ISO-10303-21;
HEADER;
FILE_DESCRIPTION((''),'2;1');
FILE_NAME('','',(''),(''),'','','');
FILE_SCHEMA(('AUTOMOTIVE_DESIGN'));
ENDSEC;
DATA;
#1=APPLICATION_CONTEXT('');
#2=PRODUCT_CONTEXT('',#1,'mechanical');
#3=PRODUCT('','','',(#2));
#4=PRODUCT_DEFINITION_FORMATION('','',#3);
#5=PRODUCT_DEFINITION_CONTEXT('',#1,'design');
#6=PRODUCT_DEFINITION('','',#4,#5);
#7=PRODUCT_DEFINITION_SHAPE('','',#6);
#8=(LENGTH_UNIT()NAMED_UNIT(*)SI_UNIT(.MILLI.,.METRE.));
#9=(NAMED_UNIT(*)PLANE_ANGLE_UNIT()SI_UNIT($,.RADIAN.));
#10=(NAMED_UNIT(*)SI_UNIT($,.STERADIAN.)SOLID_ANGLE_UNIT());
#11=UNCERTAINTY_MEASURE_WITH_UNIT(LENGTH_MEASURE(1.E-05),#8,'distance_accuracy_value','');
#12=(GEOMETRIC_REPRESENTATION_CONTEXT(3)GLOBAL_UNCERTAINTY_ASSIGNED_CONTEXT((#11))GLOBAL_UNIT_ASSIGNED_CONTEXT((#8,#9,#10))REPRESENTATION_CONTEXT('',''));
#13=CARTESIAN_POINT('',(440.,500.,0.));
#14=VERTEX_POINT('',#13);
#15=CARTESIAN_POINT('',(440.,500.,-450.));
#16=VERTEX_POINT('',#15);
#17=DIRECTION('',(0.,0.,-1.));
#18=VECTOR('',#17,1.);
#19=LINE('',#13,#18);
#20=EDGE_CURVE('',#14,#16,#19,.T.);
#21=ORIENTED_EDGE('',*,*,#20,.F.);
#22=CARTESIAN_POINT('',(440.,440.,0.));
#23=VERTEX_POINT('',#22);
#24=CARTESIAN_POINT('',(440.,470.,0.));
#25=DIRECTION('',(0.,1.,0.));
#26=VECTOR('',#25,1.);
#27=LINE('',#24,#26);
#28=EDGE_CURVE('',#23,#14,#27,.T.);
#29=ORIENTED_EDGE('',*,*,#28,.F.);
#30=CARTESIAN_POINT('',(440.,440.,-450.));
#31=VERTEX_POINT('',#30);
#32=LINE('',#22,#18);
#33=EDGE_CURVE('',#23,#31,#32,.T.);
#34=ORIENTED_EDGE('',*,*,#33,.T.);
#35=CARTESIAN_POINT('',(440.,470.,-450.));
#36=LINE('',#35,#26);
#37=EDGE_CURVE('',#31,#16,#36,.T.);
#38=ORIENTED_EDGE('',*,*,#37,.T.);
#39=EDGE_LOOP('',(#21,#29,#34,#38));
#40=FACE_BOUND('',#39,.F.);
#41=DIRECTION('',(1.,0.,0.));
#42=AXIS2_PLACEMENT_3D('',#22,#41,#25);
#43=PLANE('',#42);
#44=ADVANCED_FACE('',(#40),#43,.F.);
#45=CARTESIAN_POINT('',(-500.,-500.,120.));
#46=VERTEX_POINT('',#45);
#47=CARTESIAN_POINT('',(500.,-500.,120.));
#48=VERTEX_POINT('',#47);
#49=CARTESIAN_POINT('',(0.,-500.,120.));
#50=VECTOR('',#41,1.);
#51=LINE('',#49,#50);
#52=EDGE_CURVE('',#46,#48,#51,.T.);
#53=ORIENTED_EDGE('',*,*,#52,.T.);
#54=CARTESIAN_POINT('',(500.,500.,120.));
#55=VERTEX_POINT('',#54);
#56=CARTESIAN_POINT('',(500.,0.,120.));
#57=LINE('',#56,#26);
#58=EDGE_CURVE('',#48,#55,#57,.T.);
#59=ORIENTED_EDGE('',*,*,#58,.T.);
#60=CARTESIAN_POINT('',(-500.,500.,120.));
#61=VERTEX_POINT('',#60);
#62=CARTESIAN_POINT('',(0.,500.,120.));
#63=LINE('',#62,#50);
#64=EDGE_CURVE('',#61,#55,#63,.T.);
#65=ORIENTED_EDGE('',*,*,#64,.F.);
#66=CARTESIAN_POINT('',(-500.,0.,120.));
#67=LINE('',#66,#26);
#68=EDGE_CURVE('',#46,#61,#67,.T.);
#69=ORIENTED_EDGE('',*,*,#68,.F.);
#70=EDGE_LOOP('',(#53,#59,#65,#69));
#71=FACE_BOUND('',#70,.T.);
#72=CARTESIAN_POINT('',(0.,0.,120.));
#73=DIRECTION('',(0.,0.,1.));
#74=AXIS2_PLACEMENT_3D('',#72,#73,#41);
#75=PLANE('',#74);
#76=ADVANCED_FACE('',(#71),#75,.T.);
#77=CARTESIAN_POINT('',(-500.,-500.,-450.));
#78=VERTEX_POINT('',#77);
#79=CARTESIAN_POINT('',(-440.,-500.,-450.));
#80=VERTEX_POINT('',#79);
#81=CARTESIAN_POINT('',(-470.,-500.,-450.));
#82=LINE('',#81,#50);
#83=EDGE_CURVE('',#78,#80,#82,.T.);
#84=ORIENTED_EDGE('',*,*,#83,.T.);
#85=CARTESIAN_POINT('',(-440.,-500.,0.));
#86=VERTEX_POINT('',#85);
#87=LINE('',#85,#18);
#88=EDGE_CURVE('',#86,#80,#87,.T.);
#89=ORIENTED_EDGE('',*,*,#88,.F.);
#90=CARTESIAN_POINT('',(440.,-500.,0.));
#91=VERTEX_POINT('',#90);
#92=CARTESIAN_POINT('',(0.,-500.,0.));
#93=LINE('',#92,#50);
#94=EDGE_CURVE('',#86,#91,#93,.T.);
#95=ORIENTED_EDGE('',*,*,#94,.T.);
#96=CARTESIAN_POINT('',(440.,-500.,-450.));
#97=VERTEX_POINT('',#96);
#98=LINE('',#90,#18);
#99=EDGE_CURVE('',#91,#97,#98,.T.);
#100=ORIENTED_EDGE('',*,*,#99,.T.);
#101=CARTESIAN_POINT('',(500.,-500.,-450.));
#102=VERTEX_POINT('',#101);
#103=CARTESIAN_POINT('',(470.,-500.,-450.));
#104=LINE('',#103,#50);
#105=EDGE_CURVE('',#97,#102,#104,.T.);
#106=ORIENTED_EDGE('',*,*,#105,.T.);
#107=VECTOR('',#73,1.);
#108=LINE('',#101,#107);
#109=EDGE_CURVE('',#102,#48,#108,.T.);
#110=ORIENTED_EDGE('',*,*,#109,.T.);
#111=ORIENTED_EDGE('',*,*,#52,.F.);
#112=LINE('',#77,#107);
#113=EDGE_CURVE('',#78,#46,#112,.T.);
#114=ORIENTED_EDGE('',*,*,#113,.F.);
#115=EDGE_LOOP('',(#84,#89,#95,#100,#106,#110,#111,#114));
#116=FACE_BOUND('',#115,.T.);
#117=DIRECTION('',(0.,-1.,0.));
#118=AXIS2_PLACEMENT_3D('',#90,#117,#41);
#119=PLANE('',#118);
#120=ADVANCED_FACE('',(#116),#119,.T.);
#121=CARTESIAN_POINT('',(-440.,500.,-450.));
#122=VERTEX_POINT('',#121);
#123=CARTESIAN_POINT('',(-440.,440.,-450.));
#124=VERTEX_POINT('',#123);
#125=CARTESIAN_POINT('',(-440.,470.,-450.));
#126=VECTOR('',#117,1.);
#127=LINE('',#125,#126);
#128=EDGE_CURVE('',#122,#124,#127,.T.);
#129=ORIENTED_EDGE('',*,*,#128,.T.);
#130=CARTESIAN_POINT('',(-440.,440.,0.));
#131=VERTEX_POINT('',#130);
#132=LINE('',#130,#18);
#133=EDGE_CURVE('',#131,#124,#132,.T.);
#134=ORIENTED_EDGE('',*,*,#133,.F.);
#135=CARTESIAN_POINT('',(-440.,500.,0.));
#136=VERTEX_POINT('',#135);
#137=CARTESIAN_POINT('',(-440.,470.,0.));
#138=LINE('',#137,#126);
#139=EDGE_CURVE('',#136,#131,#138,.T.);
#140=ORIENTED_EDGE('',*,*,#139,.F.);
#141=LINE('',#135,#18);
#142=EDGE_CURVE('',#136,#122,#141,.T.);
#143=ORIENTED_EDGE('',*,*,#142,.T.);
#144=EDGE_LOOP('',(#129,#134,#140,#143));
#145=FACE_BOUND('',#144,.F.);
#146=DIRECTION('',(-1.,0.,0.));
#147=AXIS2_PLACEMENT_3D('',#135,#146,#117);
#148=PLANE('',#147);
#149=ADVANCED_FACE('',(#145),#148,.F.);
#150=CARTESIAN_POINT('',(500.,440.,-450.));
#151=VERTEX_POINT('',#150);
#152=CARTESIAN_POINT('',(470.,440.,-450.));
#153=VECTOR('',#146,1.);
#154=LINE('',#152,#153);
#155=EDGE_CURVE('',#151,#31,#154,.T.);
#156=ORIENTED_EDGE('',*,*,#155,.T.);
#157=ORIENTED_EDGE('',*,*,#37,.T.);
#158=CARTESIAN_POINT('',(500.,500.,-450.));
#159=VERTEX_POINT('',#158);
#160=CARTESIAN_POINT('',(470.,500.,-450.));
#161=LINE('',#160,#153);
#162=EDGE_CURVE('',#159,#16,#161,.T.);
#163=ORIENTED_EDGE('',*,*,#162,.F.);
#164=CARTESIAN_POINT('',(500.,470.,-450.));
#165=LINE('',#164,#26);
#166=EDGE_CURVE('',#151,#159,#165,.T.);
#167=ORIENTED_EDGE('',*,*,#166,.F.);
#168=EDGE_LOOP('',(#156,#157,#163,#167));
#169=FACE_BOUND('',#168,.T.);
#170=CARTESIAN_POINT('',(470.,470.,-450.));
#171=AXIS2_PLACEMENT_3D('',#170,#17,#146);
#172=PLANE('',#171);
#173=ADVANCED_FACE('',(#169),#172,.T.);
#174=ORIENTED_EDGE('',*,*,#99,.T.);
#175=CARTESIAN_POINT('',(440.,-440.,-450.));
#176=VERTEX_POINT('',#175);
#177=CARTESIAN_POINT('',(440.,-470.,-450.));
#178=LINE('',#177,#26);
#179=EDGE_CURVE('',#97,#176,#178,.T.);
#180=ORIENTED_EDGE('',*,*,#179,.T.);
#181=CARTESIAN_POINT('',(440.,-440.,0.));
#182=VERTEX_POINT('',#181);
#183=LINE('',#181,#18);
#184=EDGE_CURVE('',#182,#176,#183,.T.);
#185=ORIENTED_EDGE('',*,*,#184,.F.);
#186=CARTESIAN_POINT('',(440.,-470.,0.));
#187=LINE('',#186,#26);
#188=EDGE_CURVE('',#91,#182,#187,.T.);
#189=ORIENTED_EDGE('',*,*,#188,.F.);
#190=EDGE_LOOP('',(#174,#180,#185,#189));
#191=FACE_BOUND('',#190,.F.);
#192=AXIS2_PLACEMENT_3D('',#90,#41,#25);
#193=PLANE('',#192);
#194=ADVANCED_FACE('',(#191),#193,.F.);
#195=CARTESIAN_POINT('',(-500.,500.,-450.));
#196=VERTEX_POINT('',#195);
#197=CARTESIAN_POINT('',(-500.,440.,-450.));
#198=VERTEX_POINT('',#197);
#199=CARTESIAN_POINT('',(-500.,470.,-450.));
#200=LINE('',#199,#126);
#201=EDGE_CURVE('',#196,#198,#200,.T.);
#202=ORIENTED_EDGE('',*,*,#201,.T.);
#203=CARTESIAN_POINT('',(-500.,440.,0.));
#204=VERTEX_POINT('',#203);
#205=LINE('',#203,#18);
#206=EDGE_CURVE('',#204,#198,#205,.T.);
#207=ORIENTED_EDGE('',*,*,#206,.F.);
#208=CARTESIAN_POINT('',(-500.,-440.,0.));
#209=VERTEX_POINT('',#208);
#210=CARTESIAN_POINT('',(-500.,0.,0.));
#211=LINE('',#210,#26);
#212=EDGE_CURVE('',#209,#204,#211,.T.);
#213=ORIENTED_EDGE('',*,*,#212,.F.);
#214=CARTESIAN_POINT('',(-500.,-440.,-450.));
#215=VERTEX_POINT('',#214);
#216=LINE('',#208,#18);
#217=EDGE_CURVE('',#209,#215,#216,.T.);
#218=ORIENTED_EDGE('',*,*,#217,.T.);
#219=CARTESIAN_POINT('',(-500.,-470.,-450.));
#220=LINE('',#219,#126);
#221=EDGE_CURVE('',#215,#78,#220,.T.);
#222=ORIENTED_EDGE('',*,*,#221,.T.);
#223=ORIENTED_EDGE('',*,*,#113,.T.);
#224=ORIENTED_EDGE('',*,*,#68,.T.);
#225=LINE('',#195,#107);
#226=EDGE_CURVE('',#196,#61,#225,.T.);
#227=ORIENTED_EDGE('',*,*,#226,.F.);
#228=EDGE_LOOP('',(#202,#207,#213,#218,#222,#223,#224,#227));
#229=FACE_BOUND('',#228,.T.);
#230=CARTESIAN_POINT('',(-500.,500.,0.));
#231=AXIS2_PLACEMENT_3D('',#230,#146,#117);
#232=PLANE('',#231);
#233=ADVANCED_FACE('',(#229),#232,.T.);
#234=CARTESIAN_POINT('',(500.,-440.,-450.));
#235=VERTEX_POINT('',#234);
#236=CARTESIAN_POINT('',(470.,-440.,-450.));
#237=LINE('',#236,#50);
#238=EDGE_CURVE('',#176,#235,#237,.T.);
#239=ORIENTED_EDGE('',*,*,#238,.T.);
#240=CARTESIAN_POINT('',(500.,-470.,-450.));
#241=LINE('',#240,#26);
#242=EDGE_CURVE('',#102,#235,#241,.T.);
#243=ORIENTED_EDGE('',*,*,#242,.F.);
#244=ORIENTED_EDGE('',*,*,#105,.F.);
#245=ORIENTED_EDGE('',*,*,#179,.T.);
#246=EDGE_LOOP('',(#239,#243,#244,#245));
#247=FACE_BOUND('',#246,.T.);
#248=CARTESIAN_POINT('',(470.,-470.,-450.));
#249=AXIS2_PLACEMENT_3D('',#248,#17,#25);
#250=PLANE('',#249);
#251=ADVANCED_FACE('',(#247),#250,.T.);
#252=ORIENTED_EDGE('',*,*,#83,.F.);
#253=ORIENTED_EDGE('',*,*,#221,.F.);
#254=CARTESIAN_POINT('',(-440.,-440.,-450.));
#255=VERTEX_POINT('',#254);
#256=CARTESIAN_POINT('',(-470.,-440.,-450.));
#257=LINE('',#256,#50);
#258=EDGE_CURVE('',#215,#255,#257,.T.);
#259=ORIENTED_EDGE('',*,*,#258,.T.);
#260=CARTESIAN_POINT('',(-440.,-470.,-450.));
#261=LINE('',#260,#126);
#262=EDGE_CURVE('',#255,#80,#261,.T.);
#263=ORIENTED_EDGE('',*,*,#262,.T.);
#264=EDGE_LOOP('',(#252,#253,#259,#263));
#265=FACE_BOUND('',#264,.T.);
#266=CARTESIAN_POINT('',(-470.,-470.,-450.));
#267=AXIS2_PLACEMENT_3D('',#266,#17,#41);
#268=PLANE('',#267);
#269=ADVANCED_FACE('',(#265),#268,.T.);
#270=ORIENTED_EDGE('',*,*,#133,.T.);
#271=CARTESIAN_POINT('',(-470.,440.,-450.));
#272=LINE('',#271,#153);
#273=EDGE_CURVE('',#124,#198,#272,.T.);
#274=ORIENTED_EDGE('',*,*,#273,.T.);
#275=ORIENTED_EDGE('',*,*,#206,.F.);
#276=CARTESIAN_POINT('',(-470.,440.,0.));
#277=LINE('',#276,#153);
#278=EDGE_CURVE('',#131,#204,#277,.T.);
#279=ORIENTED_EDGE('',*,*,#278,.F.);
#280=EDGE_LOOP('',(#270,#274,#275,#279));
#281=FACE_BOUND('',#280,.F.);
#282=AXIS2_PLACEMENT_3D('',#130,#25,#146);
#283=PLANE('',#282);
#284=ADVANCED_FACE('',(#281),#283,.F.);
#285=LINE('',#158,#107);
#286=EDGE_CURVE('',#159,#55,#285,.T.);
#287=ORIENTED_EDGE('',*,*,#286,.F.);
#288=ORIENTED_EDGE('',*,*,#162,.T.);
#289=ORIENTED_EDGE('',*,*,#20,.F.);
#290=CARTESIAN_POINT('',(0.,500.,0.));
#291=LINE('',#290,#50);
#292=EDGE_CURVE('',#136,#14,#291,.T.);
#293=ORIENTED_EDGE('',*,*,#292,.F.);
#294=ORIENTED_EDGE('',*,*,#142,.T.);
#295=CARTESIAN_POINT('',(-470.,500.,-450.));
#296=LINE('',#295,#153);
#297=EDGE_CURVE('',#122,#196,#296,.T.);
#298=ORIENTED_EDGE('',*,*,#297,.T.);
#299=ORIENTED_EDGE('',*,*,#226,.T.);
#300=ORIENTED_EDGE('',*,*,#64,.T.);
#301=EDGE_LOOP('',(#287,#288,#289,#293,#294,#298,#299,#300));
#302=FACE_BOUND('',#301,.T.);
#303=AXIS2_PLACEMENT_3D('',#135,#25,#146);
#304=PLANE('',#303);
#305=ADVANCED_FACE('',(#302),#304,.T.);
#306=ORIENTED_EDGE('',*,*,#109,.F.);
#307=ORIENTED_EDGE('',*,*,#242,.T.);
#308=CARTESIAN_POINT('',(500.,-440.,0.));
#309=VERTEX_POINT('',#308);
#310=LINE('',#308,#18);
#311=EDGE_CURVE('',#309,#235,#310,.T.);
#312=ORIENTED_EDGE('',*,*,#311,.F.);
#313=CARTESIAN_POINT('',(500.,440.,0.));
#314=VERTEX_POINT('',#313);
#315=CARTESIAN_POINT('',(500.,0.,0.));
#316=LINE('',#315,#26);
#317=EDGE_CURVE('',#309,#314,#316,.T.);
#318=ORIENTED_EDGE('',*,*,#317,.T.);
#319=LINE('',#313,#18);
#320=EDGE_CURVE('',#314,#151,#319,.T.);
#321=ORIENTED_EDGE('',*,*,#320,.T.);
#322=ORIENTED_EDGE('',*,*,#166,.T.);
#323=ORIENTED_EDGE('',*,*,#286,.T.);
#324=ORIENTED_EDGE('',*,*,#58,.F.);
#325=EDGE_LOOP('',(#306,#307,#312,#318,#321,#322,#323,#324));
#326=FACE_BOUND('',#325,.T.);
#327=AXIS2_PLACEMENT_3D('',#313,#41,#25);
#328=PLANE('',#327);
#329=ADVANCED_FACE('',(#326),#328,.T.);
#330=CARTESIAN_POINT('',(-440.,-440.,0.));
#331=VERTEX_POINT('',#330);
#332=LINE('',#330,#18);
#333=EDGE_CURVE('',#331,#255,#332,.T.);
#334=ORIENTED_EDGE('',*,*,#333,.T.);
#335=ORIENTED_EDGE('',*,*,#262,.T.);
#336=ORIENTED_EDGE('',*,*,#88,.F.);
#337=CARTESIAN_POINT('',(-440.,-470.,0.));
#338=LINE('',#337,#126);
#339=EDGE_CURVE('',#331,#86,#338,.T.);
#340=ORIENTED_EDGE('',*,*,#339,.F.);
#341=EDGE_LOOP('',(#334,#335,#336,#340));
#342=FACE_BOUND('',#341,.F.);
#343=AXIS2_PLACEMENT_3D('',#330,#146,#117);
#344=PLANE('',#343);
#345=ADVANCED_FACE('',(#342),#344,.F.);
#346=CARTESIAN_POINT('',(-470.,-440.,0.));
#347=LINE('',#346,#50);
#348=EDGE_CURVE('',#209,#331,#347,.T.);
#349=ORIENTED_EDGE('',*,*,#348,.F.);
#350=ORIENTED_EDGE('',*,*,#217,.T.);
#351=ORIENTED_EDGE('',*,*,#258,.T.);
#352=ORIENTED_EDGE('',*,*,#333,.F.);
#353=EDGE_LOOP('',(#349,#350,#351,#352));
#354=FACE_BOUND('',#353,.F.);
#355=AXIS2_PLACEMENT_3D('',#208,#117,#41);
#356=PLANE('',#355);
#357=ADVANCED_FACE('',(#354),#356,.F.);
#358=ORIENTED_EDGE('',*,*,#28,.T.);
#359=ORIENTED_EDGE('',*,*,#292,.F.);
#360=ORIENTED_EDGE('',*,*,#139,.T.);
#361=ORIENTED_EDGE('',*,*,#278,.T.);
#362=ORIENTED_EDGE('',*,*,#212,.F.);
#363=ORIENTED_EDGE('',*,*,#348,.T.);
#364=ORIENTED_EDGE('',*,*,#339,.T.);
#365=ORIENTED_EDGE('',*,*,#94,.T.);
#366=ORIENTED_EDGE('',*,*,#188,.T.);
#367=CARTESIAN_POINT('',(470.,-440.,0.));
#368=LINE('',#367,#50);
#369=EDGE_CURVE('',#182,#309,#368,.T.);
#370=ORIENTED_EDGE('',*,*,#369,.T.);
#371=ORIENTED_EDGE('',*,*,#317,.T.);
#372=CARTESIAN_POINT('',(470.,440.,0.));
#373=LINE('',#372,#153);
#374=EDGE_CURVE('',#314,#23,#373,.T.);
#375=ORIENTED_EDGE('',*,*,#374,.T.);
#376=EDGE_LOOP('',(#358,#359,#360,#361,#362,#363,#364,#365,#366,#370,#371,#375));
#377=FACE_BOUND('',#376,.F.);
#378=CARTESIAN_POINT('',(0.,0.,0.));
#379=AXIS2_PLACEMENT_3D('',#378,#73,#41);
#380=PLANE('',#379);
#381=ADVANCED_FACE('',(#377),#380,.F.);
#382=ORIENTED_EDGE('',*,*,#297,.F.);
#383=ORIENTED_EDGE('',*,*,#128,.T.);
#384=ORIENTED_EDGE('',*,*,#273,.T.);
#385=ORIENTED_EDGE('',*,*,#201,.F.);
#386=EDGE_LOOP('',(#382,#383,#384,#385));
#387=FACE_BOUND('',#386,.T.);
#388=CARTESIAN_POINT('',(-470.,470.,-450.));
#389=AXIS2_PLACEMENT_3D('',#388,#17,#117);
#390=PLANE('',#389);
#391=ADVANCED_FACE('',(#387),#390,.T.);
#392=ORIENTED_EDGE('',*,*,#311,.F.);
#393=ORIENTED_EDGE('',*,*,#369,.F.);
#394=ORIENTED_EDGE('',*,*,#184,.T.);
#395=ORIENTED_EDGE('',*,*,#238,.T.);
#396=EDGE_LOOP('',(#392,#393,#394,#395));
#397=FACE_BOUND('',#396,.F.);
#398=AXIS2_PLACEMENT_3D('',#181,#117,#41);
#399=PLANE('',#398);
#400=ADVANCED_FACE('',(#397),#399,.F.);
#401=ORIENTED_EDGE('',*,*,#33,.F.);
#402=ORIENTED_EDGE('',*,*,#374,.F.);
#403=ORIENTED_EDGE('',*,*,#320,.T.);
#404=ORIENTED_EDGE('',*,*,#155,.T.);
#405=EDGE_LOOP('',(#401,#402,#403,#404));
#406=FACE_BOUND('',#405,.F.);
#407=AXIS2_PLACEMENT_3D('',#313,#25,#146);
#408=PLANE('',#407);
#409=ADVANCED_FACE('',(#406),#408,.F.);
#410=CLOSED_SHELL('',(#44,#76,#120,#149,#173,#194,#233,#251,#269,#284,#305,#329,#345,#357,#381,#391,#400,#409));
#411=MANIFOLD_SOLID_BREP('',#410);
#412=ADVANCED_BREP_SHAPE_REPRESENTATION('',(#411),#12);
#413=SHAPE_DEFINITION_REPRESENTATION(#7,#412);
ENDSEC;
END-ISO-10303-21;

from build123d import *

# Parameters (mm, degrees)
F0_W            = 1000
F0_H            = 1000
F1_DEPTH        = 120
F2_W            = 60
F2_H            = 60
F3_DEPTH        = 450
F3_COPIES_COUNT = 4


# Not quite as in the source:
# - a pattern or mirror of a feature is missing from the dataset's text; its kind, count and spacing are read off the source's solid


with BuildPart() as f1:
    # F0 (on Top) → F1 (new body)
    with BuildSketch(Plane.XY):
        Rectangle(F0_W, F0_H)
    extrude(amount=F1_DEPTH)

    # F2 (on face) → F3 (join)
    with BuildSketch(Plane(origin=(0, 0, 0), x_dir=(1, 0, 0), z_dir=(0, 0, -1))):
        with Locations((-470, 470)):
            Rectangle(F2_W, F2_H)
    f3 = extrude(amount=F3_DEPTH)

    # F3_copies: F3 ×4 about axis
    f3_copies_axis = Axis((0, 0, 0), (0, 0, 1))
    for i in range(1, F3_COPIES_COUNT):
        add(f3.rotate(f3_copies_axis, i * 360 / F3_COPIES_COUNT))


solid = f1.part
